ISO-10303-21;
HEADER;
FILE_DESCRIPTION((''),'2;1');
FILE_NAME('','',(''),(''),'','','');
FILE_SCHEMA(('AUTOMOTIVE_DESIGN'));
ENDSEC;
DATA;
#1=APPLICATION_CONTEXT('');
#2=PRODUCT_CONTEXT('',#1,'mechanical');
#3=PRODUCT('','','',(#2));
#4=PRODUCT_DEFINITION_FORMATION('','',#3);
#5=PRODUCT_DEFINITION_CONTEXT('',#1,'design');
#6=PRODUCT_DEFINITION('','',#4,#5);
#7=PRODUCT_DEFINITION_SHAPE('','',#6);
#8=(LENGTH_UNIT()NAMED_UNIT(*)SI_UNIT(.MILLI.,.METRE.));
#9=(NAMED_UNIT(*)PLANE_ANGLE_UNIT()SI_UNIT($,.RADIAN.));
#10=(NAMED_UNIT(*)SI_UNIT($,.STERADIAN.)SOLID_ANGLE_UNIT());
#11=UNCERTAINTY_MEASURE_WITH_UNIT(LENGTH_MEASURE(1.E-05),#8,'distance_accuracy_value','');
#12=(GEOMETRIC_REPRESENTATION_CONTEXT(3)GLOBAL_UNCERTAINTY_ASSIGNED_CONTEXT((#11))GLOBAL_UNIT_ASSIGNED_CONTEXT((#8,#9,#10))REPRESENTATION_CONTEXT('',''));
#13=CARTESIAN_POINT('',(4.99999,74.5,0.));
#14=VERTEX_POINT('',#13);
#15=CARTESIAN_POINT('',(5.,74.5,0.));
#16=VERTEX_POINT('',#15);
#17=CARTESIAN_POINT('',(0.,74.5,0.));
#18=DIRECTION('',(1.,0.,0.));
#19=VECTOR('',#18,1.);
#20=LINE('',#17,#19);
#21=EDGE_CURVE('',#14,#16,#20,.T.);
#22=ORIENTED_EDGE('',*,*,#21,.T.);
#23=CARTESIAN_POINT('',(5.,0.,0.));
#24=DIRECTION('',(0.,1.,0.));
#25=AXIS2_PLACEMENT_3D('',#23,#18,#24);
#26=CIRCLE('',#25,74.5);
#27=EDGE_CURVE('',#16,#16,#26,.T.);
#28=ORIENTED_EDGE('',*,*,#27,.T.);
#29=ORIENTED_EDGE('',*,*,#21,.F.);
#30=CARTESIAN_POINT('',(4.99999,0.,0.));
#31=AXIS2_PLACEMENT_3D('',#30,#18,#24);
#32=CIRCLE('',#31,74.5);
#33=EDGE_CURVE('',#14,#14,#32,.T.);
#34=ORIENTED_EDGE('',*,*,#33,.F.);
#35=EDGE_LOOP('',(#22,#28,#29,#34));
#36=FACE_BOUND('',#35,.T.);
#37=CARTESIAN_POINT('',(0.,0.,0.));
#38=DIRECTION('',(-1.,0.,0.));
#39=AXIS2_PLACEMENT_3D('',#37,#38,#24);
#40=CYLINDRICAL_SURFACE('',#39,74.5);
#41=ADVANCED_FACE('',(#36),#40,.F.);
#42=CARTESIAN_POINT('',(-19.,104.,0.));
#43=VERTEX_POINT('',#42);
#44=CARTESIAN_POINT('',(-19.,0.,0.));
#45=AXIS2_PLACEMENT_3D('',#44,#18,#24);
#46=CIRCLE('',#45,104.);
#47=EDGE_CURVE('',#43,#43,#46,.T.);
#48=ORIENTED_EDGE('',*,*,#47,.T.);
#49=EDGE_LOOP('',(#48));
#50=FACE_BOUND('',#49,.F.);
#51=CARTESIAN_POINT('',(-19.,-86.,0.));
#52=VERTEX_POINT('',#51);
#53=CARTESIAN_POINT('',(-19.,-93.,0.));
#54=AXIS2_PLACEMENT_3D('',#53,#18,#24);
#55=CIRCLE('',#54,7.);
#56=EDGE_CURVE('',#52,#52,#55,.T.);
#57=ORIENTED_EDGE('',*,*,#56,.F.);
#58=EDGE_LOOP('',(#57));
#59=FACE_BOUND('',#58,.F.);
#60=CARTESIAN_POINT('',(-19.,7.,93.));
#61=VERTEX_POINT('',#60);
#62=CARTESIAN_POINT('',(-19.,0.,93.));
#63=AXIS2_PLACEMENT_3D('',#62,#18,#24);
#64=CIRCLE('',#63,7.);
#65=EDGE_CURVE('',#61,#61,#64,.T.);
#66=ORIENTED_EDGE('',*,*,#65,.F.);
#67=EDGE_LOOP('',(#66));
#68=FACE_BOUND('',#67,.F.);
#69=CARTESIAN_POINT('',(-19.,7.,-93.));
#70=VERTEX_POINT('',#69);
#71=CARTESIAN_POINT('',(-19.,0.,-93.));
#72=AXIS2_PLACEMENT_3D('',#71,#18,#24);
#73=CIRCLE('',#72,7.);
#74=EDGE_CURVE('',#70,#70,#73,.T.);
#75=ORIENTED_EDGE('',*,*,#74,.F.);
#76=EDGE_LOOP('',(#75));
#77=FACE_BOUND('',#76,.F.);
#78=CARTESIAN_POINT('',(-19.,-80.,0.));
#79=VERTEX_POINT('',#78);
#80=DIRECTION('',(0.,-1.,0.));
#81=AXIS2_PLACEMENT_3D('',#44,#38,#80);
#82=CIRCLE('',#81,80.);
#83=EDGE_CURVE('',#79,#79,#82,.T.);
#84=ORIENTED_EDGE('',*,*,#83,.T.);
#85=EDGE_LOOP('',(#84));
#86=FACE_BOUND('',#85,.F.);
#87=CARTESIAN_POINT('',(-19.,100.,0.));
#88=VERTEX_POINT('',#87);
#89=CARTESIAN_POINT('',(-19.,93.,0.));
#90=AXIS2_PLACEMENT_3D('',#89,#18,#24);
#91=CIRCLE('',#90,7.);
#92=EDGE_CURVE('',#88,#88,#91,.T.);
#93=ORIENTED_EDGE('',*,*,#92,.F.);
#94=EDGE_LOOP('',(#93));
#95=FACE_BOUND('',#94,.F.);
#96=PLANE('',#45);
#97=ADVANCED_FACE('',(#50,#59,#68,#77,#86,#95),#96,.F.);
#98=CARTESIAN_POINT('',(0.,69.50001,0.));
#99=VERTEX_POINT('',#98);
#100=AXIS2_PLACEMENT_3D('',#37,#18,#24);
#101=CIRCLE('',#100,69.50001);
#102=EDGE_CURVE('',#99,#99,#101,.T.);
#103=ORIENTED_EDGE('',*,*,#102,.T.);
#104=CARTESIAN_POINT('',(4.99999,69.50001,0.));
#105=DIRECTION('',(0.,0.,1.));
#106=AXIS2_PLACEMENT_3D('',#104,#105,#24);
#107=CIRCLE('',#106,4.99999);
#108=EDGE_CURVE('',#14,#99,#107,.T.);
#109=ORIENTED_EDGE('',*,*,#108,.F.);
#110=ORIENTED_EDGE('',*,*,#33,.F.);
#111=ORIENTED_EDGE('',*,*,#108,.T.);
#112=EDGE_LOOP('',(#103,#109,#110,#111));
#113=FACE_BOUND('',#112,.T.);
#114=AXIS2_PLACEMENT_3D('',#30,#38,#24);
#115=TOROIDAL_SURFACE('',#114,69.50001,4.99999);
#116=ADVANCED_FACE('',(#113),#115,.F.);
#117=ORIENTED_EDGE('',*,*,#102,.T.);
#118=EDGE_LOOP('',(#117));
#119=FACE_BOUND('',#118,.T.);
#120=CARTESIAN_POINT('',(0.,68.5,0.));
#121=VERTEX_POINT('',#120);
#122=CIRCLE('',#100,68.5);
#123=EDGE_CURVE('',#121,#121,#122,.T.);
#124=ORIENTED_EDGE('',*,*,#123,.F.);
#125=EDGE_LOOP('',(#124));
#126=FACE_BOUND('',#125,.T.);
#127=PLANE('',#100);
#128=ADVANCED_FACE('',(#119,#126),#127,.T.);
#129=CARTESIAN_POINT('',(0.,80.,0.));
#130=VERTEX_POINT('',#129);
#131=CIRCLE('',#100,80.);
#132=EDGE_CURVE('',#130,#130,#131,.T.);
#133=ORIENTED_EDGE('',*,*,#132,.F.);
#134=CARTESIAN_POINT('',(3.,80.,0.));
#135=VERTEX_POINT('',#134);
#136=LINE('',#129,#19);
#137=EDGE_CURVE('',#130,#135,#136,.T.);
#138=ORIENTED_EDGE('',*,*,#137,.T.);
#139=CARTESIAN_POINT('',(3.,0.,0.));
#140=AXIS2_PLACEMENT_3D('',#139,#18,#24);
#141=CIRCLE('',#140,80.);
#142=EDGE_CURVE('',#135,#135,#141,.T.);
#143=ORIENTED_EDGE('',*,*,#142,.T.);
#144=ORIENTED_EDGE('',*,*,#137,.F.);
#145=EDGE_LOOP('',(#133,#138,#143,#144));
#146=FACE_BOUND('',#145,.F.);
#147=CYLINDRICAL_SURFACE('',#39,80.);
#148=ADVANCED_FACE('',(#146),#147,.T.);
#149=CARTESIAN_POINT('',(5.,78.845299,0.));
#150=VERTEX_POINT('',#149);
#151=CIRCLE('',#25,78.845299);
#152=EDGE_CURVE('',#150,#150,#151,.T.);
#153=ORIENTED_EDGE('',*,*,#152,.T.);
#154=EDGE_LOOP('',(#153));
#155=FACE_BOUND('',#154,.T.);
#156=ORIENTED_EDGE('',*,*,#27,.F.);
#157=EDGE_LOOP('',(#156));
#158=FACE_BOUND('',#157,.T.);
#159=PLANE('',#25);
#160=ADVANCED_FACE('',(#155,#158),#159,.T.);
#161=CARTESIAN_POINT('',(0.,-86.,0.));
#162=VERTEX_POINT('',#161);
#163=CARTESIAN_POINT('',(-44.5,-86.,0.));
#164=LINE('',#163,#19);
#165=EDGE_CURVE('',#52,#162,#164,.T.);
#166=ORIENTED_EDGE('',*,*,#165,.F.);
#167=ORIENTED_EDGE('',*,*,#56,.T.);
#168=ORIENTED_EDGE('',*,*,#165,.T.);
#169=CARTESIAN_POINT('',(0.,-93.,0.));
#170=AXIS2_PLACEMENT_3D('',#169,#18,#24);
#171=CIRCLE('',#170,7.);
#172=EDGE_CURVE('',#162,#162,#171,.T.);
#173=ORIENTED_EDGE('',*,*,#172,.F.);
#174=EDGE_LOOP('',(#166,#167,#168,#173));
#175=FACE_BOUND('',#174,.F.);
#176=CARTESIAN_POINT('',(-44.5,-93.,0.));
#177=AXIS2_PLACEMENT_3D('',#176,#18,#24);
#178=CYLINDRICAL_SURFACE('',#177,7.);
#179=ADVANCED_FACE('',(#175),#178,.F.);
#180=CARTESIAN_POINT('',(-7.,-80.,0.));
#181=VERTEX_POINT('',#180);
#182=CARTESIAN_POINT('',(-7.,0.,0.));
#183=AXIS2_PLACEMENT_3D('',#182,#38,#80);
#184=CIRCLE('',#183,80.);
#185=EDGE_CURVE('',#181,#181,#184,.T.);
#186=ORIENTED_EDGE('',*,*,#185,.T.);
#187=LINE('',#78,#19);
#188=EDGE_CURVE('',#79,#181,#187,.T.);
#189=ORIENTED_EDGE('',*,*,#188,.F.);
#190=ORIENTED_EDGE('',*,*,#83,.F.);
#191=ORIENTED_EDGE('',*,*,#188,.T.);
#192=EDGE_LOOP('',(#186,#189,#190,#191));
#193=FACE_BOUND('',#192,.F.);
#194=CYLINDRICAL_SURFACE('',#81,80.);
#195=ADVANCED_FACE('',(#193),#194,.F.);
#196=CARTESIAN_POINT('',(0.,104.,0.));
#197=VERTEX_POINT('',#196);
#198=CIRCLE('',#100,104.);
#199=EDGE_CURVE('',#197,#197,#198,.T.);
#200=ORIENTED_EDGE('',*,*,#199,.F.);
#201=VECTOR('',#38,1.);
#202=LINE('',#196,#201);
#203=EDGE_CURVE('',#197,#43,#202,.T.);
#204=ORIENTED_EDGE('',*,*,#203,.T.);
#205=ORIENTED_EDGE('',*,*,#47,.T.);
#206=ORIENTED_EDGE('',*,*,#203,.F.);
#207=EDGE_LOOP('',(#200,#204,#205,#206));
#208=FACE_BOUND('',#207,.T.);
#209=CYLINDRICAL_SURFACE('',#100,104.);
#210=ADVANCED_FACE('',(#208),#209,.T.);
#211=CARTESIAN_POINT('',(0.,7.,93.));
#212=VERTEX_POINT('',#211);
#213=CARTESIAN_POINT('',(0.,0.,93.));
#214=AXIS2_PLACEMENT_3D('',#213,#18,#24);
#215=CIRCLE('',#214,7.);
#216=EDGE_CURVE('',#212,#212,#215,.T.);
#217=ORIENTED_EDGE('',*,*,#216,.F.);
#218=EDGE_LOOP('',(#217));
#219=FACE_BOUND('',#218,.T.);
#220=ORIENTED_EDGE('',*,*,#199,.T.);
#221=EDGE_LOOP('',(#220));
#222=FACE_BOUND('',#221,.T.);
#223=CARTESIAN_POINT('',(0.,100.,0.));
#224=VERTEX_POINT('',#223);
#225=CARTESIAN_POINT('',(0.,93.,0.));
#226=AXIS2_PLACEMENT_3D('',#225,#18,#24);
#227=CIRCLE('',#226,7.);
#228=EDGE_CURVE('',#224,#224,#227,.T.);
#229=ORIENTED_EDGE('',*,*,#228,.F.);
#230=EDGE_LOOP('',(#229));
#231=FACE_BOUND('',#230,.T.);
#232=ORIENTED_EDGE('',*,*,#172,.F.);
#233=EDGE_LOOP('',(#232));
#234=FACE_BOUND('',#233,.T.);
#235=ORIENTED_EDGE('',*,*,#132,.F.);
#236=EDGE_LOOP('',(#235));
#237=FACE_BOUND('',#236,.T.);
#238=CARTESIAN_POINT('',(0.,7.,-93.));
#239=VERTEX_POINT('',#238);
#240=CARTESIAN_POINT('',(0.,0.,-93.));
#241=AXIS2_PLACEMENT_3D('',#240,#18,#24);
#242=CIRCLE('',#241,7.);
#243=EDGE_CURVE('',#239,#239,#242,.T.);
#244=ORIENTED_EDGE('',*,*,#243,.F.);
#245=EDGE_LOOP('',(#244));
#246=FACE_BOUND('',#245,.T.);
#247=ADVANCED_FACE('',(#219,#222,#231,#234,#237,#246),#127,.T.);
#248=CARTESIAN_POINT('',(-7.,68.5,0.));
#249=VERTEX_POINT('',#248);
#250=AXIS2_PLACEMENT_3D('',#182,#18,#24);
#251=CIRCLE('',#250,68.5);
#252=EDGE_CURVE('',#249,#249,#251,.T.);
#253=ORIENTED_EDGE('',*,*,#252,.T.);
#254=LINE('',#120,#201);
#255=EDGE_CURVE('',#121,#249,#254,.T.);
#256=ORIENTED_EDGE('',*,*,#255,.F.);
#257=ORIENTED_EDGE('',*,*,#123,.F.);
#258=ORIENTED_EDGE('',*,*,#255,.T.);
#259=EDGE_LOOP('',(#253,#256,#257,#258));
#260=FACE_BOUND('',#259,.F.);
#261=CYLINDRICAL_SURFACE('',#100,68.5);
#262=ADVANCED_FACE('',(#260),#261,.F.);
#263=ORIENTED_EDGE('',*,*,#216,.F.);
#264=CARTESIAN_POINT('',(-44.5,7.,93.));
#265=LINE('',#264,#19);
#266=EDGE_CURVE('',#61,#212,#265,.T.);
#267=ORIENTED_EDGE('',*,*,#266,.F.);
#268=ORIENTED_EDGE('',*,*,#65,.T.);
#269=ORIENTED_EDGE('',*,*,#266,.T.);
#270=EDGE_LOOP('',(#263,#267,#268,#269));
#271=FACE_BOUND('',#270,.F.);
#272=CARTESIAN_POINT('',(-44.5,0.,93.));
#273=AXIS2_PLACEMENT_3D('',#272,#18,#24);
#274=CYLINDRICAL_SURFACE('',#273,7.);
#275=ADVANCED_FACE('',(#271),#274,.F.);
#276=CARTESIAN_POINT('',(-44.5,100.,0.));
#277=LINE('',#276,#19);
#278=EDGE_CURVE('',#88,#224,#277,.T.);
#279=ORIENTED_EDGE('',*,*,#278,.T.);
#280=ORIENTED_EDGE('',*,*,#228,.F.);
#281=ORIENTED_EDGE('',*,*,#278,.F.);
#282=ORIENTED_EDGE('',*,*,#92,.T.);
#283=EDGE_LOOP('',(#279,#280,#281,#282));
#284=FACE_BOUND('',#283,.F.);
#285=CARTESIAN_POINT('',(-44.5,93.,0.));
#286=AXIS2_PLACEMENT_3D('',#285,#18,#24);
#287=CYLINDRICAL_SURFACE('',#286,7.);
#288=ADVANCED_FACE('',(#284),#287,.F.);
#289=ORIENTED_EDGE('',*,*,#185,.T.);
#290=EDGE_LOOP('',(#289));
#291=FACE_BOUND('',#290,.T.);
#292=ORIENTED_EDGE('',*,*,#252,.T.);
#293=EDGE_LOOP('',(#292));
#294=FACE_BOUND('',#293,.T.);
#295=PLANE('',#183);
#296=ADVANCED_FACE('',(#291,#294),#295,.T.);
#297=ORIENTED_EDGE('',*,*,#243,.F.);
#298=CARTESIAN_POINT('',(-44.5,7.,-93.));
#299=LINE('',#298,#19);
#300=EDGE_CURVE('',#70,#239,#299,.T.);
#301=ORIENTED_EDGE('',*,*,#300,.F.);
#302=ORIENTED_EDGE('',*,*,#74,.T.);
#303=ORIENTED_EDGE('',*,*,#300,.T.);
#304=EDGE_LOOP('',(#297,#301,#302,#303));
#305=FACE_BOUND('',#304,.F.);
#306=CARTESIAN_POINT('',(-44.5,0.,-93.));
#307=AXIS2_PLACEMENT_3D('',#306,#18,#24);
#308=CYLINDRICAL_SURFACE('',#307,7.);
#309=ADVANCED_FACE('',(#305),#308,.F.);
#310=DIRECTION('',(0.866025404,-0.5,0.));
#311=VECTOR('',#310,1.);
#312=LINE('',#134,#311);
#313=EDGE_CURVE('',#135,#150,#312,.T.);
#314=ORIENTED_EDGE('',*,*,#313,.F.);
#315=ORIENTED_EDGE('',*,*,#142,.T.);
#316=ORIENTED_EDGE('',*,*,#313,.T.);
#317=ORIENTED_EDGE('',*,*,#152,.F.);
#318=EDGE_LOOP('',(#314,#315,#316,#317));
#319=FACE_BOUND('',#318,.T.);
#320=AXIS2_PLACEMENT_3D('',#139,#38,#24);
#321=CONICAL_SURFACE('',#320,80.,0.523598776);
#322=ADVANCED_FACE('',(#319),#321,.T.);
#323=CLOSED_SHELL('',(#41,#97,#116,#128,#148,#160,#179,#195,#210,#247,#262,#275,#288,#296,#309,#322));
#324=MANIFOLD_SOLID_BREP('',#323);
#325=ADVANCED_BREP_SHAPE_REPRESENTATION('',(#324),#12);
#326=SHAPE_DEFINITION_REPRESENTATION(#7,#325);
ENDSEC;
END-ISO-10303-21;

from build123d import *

# Parameters (mm, degrees)
F0_R     = 104
F0_R_2   = 68.5
F1_DEPTH = 19
F2_R     = 80
F2_R_2   = 74.5
F3_DEPTH = 5
F4_R     = 80
F5_DEPTH = 12
F6_SIZE2 = 1.1547005384
F6_SIZE  = 2
F7_R     = 4.99999
F9_D     = 14
F9_DEPTH = 25.5
F9_TIP   = 4.2060243332


# Not quite as in the source:
# - a fillet or chamfer is up to 0.001 mm smaller than in the source, because OpenCascade refuses the exact size


with BuildPart() as f1:
    # F0 (on Right) → F1 (new body)
    with BuildSketch(Plane.YZ):
        Circle(F0_R)
        Circle(F0_R_2, mode=Mode.SUBTRACT)
    extrude(amount=-F1_DEPTH)

    # F2 (on face) → F3 (join)
    with BuildSketch(Plane.YZ):
        Circle(F2_R)
        Circle(F2_R_2, mode=Mode.SUBTRACT)
    extrude(amount=F3_DEPTH)

    # F4 (on face) → F5 (cut)
    with BuildSketch(Plane(origin=(-19, 0, 0), x_dir=(0, -1, 0), z_dir=(-1, 0, 0))):
        Circle(F4_R)
    extrude(amount=-F5_DEPTH, mode=Mode.SUBTRACT)

    # F6
    f6_edges = [f1.edges().sort_by_distance(p)[0] for p in [
        (5, -80, 0),
    ]]
    f6_side = f1.faces().sort_by_distance((2.5, -80, 0))[0]
    chamfer(f6_edges, length=F6_SIZE, length2=F6_SIZE2, reference=f6_side)

    # F7 (radius 5 in the source; OpenCascade refuses exactly that, so slightly less here)
    f7_edges = [f1.edges().sort_by_distance(p)[0] for p in [
        (0, -74.5, 0),
    ]]
    fillet(f7_edges, radius=F7_R)

    # F9
    with Locations(Plane(origin=(-19, 0, 0), x_dir=(0, -1, 0), z_dir=(-1, 0, 0))):
        with Locations((0, -93), (-93, 0), (0, 93), (93, 0)):
            Hole(F9_D / 2, depth=F9_DEPTH)
            with Locations((0, 0, -(F9_DEPTH + F9_TIP / 2))):  # 118° drill point
                Cone(0, F9_D / 2, F9_TIP, mode=Mode.SUBTRACT)


solid = f1.part
